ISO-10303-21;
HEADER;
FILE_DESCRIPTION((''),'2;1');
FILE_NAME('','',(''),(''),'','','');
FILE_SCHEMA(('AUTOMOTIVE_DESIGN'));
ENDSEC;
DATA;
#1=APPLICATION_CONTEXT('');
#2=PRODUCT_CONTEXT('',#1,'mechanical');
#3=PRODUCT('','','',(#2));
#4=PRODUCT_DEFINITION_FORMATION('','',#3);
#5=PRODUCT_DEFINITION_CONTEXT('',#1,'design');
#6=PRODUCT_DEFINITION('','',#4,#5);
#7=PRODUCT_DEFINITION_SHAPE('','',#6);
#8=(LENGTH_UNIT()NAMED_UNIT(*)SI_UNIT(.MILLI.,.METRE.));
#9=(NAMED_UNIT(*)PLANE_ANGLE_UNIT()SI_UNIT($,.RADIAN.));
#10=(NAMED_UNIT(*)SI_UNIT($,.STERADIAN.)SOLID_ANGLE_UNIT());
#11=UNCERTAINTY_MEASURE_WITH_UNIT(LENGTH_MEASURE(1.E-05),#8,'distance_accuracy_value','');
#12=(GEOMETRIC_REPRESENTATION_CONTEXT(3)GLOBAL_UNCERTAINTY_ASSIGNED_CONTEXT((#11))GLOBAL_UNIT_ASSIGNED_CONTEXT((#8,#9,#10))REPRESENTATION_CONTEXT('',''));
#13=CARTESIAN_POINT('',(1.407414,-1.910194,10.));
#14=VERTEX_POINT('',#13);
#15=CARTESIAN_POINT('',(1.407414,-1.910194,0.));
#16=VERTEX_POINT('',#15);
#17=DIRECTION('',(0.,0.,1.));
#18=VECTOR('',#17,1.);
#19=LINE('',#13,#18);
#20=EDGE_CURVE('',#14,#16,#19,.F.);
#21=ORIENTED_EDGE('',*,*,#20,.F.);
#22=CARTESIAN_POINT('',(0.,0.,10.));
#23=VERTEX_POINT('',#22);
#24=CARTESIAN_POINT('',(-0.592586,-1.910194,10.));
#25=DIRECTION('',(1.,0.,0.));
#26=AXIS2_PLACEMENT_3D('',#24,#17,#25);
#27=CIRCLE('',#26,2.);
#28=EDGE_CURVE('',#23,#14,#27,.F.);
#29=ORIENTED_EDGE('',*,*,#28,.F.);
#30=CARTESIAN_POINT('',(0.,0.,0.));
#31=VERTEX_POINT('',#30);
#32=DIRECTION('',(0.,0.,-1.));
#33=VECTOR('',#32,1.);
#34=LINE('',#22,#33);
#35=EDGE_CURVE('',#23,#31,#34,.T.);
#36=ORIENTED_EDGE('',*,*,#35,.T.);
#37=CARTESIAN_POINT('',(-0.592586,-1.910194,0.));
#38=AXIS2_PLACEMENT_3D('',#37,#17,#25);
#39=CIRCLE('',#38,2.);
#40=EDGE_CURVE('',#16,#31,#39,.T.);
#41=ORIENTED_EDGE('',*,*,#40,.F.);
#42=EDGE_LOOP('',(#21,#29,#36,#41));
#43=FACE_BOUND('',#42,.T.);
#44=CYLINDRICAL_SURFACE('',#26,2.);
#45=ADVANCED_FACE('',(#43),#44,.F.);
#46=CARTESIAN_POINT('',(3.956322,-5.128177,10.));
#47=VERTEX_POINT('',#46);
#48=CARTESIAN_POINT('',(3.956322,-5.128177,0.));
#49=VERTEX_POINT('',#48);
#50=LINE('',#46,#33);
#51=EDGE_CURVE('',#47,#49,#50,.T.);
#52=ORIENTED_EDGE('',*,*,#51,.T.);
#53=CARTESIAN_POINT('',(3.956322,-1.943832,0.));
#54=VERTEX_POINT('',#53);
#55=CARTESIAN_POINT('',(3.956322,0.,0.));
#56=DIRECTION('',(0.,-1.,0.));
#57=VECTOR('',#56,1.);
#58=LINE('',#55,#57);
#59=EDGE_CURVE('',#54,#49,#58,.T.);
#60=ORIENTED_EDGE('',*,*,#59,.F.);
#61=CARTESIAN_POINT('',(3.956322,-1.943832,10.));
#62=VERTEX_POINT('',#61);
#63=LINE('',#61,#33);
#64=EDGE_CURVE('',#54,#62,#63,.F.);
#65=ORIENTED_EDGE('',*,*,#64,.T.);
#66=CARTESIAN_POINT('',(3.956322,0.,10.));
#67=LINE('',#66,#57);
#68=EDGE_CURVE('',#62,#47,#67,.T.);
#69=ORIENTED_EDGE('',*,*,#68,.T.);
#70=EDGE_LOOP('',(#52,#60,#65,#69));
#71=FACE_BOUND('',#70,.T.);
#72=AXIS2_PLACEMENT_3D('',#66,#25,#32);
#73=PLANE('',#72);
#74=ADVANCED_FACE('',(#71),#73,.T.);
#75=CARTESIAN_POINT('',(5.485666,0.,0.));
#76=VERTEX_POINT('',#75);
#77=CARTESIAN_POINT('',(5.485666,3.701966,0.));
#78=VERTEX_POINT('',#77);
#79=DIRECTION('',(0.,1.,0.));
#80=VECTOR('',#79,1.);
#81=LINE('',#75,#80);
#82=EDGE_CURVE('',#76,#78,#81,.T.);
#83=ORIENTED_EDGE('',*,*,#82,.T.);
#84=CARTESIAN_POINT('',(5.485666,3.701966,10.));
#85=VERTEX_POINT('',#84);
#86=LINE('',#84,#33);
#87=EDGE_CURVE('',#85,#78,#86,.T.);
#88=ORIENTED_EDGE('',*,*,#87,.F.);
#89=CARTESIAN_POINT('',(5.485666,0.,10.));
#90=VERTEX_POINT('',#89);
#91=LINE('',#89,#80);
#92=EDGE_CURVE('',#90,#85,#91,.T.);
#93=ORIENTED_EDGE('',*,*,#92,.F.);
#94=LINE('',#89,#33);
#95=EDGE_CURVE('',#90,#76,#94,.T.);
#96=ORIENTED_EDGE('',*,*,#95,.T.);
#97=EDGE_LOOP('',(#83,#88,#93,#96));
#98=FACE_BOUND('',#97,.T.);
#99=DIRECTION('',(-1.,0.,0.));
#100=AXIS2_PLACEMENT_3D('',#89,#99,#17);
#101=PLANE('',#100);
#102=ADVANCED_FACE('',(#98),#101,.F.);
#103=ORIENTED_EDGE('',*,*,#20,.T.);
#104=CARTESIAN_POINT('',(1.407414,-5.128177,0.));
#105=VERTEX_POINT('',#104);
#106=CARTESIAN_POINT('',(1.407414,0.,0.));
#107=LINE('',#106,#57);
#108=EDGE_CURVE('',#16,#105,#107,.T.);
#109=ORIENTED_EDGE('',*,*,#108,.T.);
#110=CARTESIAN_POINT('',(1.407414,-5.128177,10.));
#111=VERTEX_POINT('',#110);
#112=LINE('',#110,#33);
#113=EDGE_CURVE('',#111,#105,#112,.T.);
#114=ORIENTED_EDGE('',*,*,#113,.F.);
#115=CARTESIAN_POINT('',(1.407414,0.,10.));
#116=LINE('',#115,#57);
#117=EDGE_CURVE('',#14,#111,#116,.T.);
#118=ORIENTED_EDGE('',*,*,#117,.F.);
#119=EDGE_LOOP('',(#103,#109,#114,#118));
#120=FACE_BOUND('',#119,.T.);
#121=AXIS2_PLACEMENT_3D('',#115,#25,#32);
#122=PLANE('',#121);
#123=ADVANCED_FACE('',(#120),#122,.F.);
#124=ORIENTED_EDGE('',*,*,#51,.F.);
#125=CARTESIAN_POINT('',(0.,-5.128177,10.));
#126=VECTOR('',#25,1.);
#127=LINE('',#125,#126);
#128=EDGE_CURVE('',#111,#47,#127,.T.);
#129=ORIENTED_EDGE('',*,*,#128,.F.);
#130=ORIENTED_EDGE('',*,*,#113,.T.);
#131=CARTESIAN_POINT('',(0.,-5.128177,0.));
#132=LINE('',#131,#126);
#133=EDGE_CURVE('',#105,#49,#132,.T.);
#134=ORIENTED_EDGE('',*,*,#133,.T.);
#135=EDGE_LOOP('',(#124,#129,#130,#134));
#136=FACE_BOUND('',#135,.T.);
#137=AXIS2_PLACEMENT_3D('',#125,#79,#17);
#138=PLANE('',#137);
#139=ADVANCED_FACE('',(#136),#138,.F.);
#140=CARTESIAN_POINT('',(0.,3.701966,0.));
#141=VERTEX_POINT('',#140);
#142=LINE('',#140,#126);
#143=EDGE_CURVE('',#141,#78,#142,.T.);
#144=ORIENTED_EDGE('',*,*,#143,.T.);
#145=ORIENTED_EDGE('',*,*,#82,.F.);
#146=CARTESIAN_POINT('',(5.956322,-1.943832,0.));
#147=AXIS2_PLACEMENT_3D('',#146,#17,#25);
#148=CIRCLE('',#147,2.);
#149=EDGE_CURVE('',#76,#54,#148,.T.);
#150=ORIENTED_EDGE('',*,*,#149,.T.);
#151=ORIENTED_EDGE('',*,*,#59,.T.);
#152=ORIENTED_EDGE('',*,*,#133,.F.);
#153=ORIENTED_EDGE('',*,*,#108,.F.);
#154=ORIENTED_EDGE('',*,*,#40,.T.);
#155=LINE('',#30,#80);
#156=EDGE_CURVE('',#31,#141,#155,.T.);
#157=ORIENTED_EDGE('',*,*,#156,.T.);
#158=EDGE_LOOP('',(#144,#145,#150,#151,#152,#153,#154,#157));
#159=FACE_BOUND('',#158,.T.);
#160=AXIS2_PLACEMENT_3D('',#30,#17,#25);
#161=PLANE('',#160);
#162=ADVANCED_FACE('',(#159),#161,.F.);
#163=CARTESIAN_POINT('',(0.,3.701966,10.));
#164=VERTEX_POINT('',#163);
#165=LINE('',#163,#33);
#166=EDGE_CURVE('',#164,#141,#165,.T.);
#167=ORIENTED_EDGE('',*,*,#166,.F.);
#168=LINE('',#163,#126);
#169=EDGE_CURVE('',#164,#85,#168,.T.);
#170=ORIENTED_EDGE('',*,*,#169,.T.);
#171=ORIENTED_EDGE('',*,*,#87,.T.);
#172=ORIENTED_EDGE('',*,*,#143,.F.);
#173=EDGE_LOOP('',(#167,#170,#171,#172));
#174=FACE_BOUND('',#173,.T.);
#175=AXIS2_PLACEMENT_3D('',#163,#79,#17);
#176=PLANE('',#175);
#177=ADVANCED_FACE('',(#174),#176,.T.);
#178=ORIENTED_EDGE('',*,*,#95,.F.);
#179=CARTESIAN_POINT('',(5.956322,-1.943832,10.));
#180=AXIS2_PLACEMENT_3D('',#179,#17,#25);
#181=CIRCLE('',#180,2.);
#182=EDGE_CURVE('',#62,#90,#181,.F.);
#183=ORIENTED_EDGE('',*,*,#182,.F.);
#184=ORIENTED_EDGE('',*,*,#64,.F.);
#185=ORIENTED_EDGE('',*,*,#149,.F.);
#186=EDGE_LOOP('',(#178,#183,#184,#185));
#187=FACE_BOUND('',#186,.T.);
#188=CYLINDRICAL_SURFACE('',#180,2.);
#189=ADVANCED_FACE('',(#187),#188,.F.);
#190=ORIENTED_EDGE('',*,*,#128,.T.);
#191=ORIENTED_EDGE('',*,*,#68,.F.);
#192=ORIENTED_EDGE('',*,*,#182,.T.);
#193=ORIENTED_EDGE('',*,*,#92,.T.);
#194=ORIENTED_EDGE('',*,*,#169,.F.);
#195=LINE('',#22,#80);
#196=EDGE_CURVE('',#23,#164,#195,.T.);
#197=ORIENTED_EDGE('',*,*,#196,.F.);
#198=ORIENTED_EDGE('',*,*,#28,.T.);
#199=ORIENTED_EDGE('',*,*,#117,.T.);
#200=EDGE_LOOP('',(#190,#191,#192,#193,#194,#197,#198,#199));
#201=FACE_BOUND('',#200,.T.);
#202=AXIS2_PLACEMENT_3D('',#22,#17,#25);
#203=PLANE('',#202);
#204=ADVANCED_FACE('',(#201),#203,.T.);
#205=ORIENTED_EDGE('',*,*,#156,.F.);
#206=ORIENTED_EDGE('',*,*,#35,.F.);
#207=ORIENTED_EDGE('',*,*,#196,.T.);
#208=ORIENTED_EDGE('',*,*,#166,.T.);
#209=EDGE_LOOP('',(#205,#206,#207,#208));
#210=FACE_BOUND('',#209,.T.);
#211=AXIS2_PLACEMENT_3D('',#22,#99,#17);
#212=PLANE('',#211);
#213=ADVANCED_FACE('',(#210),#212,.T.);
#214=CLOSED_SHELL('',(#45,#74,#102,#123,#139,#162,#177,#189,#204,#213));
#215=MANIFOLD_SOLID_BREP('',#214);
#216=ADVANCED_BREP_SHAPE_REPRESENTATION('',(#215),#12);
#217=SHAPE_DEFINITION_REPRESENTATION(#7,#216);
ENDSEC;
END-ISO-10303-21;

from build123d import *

# Parameters (mm, degrees)
SKETCH3_W           = 5.48566609
SKETCH3_H           = 3.701966347
SKETCH3_W_2         = 2.548907401
SKETCH3_H_2         = 5.128177147
BOSS_EXTRUDE2_DEPTH = 10
FILLET1_R           = 2


with BuildPart() as part:
    # Sketch3 → Boss-Extrude2 (new body)
    with BuildSketch(Plane.XY):
        with Locations((2.742833045, 1.850983174)):
            Rectangle(SKETCH3_W, SKETCH3_H)
        with Locations((2.68186795, -2.564088574)):
            Rectangle(SKETCH3_W_2, SKETCH3_H_2)
    extrude(amount=BOSS_EXTRUDE2_DEPTH)

    # Fillet1
    # the kernel refuses this fillet: 2 mm, written as the material it adds along each edge
    with BuildSketch(Plane(origin=(3.95632165, 0, 0), x_dir=(1, 0, 0), z_dir=(0, 0, 1))) as fillet1_piece_1:
        with BuildLine():
            CenterArc((2, -1.943832129), FILLET1_R, 103.610945059, 76.389054941)
            Line((0, -1.943832129), (-0.04, -1.943832129))
            Line((-0.04, -1.943832129), (-0.04, 0))
            Line((-0.04, 0), (0, 0.04))
            ThreePointArc((0, 0.04), (0.76467222, 0.04), (1.519931329, 0.038876643))
            Line((1.519931329, 0.038876643), (1.52934444, 0))
        make_face()
    extrude(amount=10)
    with BuildSketch(Plane(origin=(1.407414249, 0, 0), x_dir=(-1, 0, 0), z_dir=(0, 0, 1))) as fillet1_piece_2:
        with BuildLine():
            CenterArc((2, 1.910194265), FILLET1_R, 180, 72.764919968)
            Line((0, 1.910194265), (-0.04, 1.910194265))
            Line((-0.04, 1.910194265), (-0.04, 0))
            Line((-0.04, 0), (0, -0.04))
            ThreePointArc((0, -0.04), (0.703707125, -0.04), (1.395562534, -0.038203885))
            Line((1.395562534, -0.038203885), (1.407414249, 0))
        make_face()
    extrude(amount=10)


solid = part.part
